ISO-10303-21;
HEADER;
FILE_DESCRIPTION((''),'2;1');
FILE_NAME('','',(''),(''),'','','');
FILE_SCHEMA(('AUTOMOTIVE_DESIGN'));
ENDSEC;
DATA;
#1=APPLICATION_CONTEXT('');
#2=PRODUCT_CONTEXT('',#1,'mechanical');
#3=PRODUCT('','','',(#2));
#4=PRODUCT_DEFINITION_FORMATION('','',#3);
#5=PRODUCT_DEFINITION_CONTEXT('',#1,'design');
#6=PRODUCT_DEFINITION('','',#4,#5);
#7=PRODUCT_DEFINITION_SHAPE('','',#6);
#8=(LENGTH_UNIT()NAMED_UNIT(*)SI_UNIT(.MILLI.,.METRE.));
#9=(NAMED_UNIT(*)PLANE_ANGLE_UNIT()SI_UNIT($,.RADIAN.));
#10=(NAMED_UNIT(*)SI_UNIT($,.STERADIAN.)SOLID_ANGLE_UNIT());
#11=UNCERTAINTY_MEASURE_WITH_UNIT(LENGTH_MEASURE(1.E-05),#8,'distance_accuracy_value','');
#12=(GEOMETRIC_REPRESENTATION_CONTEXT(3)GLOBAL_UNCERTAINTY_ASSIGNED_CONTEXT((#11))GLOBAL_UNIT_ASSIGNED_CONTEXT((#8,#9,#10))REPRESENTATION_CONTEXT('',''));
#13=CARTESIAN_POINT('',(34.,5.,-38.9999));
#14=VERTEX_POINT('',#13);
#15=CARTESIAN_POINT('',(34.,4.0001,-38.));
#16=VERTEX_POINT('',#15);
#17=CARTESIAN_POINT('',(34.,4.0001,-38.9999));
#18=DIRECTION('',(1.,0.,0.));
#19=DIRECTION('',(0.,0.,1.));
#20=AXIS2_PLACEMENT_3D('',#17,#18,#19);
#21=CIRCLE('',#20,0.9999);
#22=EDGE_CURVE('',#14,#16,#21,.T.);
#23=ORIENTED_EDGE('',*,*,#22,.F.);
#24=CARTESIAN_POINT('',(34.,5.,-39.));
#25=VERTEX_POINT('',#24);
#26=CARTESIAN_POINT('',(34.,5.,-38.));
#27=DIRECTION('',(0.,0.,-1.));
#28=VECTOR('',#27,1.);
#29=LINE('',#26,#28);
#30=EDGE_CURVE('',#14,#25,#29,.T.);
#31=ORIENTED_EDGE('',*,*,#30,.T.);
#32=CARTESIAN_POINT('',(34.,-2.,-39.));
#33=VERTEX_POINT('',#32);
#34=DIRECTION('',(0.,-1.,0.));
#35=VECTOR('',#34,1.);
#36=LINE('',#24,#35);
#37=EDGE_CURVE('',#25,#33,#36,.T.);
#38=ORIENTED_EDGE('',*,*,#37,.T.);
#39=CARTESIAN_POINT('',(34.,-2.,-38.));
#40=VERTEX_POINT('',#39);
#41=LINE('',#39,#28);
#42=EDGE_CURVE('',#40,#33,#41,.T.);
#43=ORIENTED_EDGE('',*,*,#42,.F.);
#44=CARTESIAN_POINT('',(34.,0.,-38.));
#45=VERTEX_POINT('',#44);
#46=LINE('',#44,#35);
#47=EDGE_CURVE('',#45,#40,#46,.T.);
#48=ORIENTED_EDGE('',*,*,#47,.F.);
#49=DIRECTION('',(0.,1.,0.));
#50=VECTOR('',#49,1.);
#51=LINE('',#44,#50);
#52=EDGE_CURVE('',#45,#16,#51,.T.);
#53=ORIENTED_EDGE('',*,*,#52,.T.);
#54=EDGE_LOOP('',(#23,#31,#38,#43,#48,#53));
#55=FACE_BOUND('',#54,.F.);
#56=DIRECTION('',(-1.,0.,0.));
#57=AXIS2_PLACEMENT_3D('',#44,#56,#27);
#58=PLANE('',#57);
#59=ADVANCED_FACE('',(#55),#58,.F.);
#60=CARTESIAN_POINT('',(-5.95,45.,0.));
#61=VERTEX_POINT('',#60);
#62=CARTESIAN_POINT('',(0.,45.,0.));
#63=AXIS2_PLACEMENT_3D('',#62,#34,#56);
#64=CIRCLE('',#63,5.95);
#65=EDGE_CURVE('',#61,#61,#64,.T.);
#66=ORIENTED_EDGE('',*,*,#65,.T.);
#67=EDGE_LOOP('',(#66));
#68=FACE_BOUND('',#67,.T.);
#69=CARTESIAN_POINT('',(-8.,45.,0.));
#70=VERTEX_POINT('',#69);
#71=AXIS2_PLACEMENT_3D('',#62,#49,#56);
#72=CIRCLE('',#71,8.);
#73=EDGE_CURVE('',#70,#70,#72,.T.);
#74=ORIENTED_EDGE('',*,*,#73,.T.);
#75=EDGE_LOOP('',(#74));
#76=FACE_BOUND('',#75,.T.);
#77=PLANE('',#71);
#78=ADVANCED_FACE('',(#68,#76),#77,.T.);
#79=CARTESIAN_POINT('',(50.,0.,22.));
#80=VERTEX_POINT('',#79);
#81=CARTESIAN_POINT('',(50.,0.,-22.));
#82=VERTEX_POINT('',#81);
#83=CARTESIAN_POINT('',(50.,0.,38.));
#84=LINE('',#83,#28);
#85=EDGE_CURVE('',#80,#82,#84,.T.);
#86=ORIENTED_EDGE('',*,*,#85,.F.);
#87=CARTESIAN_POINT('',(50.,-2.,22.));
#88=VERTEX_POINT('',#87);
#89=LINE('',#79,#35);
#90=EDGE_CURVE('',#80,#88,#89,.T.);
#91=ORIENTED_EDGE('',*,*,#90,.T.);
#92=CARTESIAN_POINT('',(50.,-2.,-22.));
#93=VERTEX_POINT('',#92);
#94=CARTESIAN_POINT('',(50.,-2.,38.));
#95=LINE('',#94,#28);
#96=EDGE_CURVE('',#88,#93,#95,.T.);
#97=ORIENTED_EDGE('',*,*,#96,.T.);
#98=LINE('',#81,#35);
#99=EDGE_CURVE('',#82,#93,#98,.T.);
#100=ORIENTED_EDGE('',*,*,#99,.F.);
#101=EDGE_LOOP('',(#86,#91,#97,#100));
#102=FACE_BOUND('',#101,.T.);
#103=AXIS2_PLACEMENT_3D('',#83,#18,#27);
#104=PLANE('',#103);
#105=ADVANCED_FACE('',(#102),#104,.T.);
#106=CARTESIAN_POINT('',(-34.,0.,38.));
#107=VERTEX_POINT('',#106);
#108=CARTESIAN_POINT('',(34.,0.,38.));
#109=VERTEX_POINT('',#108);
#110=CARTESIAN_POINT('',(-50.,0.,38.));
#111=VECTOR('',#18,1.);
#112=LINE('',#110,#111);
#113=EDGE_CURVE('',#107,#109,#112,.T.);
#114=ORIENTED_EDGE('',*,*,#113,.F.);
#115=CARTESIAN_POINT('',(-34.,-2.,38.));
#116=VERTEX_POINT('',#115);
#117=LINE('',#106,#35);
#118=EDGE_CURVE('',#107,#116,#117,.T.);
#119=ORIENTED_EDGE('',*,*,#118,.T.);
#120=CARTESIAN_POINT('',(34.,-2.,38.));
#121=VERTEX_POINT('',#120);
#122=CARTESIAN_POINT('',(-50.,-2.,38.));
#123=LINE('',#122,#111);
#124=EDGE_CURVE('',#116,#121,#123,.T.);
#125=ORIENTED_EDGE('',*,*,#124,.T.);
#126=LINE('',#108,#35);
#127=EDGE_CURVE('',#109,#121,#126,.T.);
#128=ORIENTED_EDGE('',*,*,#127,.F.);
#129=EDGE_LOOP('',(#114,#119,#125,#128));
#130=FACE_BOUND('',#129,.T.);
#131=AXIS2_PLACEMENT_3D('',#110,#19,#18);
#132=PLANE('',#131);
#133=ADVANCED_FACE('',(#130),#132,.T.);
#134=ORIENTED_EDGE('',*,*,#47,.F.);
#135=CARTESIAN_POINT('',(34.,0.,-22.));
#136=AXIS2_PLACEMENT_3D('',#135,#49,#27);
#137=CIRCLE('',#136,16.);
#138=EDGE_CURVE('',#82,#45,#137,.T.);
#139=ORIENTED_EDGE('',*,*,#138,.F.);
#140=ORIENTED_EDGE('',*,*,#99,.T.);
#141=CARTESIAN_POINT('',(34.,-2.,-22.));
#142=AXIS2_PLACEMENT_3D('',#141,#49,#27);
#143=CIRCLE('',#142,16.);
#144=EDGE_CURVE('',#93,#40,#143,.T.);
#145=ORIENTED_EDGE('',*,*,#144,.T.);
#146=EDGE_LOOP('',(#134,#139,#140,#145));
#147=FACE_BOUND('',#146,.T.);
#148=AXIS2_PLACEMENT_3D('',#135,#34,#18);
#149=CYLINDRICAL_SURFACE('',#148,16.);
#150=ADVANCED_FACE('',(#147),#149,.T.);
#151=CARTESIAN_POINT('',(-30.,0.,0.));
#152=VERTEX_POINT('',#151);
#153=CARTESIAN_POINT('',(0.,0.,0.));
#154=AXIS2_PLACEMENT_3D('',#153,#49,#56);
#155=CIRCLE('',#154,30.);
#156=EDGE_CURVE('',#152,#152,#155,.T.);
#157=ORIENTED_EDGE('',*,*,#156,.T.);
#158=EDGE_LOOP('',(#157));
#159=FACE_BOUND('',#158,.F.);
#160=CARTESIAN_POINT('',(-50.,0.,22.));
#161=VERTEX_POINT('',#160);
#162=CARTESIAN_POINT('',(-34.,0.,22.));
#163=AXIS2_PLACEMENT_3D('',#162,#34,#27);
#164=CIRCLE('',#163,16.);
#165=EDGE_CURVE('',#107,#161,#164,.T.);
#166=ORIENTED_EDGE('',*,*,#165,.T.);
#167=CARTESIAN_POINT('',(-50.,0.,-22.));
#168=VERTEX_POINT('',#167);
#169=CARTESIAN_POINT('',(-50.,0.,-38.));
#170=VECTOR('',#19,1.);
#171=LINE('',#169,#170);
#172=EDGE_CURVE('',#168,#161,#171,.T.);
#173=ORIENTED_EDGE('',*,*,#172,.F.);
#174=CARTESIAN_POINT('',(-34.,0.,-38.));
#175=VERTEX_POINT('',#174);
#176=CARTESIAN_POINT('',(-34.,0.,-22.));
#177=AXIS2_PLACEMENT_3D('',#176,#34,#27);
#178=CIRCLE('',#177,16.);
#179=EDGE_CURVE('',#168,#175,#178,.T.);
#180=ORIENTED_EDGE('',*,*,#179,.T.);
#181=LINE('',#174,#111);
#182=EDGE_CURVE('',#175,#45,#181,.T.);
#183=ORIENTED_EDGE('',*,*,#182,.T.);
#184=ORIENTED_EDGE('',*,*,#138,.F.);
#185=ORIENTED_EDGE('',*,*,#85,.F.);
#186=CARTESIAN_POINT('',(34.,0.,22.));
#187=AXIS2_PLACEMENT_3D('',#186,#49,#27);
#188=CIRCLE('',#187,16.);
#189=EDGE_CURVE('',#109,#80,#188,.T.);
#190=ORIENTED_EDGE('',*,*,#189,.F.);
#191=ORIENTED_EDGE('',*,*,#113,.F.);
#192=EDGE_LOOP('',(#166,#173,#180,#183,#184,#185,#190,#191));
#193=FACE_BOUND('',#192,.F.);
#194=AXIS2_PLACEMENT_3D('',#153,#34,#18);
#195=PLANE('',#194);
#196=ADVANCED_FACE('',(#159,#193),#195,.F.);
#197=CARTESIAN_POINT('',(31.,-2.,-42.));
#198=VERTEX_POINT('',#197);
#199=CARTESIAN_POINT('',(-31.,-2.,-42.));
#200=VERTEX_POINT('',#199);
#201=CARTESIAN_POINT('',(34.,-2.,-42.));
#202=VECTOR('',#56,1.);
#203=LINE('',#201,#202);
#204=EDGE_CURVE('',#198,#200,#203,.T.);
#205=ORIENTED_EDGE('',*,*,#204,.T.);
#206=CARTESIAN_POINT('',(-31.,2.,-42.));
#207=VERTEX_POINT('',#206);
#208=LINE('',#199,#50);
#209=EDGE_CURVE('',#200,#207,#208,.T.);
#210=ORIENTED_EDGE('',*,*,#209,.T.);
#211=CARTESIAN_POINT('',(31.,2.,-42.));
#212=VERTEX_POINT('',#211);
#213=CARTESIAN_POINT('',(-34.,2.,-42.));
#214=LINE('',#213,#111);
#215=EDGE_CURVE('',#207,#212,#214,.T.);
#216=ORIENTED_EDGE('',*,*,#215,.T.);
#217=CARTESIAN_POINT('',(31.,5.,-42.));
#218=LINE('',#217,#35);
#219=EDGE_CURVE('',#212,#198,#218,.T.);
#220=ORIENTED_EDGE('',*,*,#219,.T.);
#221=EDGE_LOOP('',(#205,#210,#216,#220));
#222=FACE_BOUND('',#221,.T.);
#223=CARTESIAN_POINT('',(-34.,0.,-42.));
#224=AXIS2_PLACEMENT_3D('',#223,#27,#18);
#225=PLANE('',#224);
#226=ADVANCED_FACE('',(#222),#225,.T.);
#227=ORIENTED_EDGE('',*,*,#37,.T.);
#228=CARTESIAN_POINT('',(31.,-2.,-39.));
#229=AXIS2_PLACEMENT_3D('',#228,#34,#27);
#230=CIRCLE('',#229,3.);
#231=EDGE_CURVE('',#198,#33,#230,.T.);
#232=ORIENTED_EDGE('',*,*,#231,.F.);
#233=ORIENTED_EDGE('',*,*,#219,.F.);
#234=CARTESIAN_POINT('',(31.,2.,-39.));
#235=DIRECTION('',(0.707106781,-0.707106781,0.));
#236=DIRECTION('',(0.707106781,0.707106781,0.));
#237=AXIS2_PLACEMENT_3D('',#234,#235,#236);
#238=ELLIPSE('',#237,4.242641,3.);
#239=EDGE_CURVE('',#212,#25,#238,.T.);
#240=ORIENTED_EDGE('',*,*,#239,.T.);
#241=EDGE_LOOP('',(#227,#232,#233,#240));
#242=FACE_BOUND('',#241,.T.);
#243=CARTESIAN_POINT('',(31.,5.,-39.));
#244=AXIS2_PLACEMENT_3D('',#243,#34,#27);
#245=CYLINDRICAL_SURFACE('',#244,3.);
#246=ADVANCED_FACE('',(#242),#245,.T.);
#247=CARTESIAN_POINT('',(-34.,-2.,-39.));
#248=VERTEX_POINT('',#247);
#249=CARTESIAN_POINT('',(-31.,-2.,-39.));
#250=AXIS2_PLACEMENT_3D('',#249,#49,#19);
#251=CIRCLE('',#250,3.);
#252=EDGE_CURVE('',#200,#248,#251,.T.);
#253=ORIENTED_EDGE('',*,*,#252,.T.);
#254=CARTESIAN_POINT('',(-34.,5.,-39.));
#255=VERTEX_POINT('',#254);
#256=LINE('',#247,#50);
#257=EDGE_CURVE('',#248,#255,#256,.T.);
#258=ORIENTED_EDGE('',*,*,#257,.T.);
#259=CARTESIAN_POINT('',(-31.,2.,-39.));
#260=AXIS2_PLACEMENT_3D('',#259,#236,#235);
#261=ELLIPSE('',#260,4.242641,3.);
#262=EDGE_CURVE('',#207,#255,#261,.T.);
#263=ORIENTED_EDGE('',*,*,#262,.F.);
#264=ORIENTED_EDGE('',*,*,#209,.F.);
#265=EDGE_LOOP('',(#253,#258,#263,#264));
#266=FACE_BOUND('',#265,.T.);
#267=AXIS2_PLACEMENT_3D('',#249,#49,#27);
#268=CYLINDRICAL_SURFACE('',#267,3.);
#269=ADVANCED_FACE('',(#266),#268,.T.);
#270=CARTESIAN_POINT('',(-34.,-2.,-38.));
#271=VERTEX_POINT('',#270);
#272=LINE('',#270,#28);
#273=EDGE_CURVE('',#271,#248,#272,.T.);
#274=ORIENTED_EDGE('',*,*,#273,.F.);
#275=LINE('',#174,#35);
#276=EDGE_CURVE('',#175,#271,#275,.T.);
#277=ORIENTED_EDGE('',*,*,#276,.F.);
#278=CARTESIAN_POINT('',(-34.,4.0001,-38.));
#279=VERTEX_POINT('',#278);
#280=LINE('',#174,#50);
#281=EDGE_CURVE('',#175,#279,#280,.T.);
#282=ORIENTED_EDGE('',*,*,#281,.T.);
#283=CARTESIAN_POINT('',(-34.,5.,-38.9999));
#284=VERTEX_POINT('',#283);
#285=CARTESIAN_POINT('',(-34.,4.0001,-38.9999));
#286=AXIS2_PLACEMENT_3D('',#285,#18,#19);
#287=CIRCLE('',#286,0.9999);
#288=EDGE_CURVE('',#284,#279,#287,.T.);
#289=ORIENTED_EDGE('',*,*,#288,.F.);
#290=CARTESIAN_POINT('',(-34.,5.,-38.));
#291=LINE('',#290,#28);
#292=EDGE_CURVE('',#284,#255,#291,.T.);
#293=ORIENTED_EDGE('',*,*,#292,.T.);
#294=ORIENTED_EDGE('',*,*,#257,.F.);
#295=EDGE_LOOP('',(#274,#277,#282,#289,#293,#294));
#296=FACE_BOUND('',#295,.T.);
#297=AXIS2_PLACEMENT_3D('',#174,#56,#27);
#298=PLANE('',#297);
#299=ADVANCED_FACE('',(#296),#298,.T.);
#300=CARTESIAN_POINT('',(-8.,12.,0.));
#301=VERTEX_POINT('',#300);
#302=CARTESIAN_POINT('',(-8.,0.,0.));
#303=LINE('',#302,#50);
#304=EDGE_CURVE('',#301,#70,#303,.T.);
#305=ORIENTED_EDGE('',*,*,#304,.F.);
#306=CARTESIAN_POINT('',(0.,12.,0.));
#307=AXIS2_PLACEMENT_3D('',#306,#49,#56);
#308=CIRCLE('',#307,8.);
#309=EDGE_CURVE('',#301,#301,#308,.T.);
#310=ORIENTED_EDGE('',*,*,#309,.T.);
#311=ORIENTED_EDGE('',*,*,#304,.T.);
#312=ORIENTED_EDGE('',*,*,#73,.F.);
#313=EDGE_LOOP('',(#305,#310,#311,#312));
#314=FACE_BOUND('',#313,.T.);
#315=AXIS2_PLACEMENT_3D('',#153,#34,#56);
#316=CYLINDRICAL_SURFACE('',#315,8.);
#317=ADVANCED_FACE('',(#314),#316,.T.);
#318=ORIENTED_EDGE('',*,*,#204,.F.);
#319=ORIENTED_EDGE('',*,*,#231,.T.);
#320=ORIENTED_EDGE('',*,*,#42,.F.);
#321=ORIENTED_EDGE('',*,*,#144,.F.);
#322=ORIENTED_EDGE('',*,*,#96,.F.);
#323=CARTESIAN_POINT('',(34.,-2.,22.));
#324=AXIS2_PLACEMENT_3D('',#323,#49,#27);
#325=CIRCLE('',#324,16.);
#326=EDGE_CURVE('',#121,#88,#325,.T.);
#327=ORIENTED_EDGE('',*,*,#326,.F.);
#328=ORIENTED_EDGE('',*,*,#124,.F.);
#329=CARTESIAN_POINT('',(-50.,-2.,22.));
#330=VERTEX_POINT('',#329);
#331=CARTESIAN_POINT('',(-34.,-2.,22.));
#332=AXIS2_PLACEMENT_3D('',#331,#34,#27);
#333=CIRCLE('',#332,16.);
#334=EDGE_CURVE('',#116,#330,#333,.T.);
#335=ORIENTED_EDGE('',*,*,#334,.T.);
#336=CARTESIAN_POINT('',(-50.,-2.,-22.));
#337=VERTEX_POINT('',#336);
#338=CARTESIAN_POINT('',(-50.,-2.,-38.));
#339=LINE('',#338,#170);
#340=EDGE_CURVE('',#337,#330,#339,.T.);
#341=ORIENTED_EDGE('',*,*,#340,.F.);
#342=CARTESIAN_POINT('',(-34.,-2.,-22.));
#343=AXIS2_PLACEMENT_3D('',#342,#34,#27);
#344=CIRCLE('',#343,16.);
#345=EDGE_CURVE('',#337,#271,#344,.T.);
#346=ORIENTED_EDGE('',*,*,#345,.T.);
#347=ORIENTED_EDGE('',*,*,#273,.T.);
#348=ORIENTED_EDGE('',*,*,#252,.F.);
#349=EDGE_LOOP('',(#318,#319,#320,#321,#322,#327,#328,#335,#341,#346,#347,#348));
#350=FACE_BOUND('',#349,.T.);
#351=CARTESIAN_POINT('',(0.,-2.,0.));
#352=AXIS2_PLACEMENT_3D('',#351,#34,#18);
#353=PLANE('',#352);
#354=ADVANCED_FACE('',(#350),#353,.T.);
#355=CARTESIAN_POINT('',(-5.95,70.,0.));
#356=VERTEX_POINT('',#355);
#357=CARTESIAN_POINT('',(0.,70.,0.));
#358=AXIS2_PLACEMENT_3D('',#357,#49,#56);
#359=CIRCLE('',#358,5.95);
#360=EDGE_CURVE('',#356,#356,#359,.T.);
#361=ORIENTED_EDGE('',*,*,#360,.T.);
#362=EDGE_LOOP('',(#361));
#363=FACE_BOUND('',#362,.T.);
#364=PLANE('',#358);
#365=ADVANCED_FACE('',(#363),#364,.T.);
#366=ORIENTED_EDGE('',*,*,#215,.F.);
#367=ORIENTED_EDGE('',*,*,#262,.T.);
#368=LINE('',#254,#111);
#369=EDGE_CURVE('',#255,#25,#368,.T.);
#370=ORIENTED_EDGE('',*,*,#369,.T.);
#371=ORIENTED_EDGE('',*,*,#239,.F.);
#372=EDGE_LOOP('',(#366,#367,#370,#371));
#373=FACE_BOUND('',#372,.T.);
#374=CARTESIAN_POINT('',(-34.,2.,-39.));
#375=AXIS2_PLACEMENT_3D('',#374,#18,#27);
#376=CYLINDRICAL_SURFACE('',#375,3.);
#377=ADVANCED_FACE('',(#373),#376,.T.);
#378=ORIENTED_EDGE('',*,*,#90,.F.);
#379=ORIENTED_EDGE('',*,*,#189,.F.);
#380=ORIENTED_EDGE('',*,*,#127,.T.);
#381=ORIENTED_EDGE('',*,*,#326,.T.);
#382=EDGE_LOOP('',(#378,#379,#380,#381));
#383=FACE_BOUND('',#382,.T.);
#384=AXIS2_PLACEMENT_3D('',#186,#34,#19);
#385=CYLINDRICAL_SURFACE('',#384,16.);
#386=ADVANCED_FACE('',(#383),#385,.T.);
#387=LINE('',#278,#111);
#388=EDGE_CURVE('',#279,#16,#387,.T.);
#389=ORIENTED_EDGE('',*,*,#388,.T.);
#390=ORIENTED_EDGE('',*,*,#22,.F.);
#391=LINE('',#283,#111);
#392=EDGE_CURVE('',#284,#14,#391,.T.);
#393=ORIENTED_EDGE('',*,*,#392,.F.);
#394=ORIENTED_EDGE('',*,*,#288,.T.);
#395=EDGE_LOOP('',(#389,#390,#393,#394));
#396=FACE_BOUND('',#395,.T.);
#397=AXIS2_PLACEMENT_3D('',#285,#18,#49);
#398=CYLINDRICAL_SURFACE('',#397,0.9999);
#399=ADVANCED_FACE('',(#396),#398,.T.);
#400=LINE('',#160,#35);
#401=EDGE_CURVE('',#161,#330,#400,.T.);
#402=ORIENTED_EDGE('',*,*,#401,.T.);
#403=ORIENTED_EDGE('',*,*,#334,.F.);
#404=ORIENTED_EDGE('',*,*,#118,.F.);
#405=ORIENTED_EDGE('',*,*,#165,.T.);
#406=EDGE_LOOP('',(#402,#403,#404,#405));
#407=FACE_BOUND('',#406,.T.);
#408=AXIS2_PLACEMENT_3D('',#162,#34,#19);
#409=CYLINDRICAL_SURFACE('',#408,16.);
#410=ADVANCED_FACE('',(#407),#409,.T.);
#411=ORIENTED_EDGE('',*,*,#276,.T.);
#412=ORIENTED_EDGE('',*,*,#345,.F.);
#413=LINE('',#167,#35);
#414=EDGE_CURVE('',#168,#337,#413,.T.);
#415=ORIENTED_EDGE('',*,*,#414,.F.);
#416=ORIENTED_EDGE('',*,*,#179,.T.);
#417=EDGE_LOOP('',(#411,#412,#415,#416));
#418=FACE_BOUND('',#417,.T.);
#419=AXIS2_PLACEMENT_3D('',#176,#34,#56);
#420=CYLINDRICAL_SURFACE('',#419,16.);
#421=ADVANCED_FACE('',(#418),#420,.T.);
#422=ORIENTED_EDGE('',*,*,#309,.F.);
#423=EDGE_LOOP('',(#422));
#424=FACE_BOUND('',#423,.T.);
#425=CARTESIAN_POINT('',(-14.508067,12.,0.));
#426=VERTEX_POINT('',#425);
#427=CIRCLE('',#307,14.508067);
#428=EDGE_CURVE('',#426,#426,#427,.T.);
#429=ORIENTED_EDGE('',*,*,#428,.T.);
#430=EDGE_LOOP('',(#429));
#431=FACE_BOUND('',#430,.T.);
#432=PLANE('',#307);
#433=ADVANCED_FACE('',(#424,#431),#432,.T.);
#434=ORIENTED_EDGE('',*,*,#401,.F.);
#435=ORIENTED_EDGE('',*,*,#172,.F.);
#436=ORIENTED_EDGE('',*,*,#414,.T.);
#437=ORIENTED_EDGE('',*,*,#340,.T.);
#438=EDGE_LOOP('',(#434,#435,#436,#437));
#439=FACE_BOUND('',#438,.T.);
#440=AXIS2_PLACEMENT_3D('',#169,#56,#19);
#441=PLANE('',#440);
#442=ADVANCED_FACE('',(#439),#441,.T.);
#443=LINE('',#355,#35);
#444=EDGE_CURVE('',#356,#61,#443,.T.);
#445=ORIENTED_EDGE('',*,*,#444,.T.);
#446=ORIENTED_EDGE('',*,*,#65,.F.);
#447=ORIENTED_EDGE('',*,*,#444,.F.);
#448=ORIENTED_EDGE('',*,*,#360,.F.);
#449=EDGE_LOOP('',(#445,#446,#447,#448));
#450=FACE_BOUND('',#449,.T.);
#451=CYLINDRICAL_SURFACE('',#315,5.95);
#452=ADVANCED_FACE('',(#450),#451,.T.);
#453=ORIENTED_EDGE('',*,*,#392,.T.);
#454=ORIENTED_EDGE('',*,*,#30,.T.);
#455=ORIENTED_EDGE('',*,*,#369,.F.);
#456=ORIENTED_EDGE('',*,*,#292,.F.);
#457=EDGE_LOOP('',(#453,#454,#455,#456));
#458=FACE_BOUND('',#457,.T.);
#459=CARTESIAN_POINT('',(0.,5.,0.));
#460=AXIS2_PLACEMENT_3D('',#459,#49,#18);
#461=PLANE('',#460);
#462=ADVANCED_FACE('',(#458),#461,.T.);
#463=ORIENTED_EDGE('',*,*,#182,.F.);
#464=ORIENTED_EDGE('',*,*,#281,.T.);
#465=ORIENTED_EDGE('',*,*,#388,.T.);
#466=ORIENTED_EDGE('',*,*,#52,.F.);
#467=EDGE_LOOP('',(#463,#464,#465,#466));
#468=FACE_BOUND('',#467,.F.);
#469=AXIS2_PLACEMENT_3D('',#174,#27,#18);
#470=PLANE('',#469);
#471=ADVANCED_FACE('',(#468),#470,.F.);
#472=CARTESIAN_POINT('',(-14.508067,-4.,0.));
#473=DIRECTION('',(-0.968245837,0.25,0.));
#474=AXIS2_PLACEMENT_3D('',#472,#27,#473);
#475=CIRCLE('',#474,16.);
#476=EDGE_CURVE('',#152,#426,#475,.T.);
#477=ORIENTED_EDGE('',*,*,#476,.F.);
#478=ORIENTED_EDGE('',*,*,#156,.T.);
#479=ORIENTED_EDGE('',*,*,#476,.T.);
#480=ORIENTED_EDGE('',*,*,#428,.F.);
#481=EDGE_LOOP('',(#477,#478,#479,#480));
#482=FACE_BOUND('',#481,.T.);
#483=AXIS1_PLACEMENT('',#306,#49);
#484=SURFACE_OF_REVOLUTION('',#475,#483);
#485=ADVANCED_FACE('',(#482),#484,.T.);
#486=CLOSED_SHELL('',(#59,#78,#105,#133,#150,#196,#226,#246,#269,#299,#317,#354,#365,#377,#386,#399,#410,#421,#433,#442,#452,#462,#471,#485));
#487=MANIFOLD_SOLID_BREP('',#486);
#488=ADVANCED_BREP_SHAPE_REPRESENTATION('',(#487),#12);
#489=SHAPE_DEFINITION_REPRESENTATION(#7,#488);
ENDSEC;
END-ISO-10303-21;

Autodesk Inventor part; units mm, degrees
ref_plane "YZ Plane" through (0, 0, 0) normal (1, 0, 0) x (0, 1, 0)
ref_plane "XZ Plane" through (0, 0, 0) normal (0, 1, 0) x (-1, 0, 0)
ref_plane "XY Plane" through (0, 0, 0) normal (0, 0, 1) x (1, 0, 0)
sketch "Sketch1" plane through (0, 0, 0) normal (0, 1, 0) x (-1, 0, 0)
  circle A0 centre (0, 0) radius 5.95
  circle A1 centre (0, 0) radius 8
  circle A2 centre (0, 0) radius 30
  dimension "d0" = 11.9
  dimension "d2" = 16
  dimension "d3" = 60
extrude "Extrusion1" add sketch "Sketch1" along normal blind 70 contours A0
extrude "Extrusion2" cut sketch "Sketch1" along normal blind 45 contours A1
extrude "Extrusion3" add sketch "Sketch1" along normal blind 45 contours A0 | A1
extrude "Extrusion4" add sketch "Sketch1" along normal blind 12 contours A2
sketch "Sketch2" plane through (0, 0, 0) normal (0, -1, 0) x (1, 0, 0)
  line L0 (-50, 38) -> (50, 38)
  line L1 (50, 38) -> (50, -38)
  line L2 (50, -38) -> (-50, -38)
  line L3 (-50, -38) -> (-50, 38)
  line L4 (-50, 38) -> (50, -38) construction
  line L5 (50, 38) -> (-50, -38) construction
  point P0 (0, 0)
  dimension "d12" = 100
extrude "Extrusion5" add sketch "Sketch2" along normal blind 2
fillet "Fillet1" radius 16 4 edges at (50, -1, 38) (50, -1, -38) (-50, -1, -38) (-50, -1, 38)
fillet "Fillet2" radius 16 1 edges at (30, 12, 0)
sketch "Sketch3" plane through (34, 0, -38) normal (0, 0, -1) x (-1, 0, 0)
  line L0 (0, 0) -> (68, 0) projected
  line L1 (0, -2) -> (68, -2)
  line L2 (68, -2) -> (68, 0)
  line L3 (68, 0) -> (0, 0)
  line L4 (0, 0) -> (0, -2)
  point P0 (34, 0)
extrude "Extrusion6" add sketch "Sketch3" along normal blind 4
sketch "Sketch4" plane through (0, 0, 0) normal (0, 1, 0) x (1, 0, 0)
  line L0 (-34, 42) -> (34, 42) projected
  line L1 (-34, 38) -> (-34, 42) projected
  line L2 (34, 42) -> (-34, 42)
  line L3 (-34, 42) -> (-34, 38)
  line L4 (-34, 38) -> (34, 38)
  line L5 (34, 38) -> (34, 42)
  point P0 (0, 0)
extrude "Extrusion7" add sketch "Sketch4" along normal blind 5
fillet "Fillet3" radius 3 3 edges at (0, 5, -42) (-34, 1.5, -42) (34, 1.5, -42)
fillet "Fillet4" radius 1 1 edges at (0, 5, -38)
